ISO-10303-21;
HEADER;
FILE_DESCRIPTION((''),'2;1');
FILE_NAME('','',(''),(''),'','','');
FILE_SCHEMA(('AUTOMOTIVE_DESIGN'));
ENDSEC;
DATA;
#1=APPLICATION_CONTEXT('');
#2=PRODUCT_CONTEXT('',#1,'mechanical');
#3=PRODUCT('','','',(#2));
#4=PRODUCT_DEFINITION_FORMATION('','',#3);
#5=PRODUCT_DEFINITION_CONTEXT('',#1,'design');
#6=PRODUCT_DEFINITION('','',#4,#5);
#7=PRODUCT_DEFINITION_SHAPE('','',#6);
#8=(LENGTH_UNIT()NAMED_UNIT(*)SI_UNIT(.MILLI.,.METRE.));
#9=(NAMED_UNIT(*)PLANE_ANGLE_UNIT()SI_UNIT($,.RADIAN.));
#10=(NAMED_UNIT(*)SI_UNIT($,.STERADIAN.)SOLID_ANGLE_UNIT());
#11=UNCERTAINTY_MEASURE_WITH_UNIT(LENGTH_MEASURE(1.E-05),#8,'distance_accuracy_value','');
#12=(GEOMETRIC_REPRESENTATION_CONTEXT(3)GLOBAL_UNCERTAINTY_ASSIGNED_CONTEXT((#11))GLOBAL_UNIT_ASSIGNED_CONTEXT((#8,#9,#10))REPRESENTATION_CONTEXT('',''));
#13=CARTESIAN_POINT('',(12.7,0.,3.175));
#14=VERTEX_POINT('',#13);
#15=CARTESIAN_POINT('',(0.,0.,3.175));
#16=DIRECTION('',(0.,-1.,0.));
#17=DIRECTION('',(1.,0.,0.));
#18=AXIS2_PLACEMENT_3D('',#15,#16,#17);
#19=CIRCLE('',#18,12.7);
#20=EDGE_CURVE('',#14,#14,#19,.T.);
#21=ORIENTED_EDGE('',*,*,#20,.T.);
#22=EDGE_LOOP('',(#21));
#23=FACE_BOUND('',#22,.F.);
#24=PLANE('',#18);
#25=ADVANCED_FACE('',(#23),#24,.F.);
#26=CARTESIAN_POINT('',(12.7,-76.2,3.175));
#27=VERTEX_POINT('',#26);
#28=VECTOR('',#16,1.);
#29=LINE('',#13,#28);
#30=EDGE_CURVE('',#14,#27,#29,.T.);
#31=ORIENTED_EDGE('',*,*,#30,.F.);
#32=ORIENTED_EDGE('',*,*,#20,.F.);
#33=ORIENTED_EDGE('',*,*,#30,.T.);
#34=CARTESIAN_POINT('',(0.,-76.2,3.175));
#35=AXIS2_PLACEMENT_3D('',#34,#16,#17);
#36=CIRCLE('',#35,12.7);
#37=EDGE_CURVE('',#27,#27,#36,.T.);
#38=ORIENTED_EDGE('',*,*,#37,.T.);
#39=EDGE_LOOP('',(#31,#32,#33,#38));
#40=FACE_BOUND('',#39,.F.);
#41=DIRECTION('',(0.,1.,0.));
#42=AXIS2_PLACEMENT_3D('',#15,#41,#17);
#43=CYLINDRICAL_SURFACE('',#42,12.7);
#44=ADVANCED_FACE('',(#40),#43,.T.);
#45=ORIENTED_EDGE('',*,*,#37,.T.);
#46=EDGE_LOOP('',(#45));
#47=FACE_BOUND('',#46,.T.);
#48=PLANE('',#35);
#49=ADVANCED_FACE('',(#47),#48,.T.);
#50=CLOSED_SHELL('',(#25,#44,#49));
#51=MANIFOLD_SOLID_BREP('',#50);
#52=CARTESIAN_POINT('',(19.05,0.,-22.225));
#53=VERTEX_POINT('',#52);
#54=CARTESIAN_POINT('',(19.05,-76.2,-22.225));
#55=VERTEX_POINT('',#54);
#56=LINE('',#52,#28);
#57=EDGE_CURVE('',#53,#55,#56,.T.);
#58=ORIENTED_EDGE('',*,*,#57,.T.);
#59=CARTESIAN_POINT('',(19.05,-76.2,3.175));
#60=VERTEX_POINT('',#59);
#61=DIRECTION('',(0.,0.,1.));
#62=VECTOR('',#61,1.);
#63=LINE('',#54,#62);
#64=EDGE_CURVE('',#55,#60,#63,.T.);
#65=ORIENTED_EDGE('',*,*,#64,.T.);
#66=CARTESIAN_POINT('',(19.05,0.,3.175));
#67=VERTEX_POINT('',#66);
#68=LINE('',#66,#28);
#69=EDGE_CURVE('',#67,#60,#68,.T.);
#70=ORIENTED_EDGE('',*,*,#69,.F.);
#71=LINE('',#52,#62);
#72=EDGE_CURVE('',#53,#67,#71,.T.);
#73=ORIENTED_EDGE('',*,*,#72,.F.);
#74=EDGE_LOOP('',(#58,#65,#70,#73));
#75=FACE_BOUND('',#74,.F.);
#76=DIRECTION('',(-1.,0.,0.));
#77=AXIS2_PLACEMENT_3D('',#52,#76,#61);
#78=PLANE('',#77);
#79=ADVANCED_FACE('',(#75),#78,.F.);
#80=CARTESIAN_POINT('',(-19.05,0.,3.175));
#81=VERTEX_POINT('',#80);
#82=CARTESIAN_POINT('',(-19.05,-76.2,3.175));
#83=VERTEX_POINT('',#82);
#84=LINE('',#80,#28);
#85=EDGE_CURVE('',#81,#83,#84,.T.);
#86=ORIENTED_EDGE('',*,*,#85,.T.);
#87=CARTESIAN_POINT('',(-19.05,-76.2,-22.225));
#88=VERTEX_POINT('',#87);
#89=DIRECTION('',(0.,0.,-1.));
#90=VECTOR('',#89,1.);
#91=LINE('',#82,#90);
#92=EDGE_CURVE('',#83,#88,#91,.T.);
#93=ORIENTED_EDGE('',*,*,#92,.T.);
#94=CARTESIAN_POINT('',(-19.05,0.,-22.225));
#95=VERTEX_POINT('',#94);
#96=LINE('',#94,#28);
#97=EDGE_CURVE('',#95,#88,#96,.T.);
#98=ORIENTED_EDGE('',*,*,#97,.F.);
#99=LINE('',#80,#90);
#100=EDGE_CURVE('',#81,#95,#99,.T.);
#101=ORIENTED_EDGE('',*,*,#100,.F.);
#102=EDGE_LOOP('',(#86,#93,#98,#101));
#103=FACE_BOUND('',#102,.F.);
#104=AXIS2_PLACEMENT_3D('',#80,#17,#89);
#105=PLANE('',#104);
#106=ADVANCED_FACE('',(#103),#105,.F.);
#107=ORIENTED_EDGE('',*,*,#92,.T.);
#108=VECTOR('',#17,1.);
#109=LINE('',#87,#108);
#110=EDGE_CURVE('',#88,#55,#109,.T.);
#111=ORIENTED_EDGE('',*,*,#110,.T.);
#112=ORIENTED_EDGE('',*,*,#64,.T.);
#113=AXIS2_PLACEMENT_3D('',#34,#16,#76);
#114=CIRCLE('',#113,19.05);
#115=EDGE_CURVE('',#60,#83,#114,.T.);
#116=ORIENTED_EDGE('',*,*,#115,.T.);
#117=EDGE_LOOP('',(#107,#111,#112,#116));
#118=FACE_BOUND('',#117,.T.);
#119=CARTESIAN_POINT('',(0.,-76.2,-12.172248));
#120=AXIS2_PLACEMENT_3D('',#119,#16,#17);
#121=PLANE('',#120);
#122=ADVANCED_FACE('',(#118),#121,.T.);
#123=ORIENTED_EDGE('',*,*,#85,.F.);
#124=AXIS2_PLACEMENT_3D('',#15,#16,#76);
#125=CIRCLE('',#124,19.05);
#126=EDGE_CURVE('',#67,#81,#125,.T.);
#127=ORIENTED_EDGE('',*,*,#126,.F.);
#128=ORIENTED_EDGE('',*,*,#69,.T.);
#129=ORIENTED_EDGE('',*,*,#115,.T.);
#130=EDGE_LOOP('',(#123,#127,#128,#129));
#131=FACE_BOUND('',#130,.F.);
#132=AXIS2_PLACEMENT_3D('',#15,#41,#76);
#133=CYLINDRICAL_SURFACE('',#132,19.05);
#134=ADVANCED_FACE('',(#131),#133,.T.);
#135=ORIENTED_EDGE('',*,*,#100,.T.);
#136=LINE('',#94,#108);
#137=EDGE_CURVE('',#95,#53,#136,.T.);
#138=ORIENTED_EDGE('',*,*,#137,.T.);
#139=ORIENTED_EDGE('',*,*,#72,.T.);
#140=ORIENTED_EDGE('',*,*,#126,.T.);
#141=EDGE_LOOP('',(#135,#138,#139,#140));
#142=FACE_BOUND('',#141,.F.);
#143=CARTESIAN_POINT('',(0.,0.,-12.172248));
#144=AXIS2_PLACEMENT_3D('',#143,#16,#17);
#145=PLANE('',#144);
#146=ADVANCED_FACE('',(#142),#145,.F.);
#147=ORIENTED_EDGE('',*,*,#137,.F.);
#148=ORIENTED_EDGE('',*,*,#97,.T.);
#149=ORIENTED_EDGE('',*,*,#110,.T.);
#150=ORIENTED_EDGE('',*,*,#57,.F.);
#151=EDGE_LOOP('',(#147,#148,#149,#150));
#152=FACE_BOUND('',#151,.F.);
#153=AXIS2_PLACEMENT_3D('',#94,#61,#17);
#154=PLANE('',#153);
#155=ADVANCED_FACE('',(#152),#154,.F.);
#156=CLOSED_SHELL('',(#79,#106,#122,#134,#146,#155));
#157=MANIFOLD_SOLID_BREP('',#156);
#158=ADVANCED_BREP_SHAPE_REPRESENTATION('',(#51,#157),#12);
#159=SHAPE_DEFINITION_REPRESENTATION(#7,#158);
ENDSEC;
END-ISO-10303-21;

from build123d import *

# Parameters (mm, degrees)
F1_R     = 12.7
F2_DEPTH = 76.2


# Not quite as in the source:
# - a feature of the source that left no trace in its solid (it failed there, or was rolled back) is left out


with BuildPart() as f2:
    # F1 (on face) → F2 (new body)
    with BuildSketch(Plane.XZ):
        with Locations((0, 3.175)):
            Circle(F1_R)
    extrude(amount=F2_DEPTH)


with BuildPart() as f2b:
    # F0 (on Front) → F2, piece 2 (new body)
    with BuildSketch(Plane.XZ):
        with BuildLine():
            Line((-19.05, 3.175), (-19.05, -22.225))
            Line((-19.05, -22.225), (19.05, -22.225))
            Line((19.05, -22.225), (19.05, 3.175))
            ThreePointArc((19.05, 3.175), (0, -15.875), (-19.05, 3.175))
        make_face()
        with BuildLine():
            ThreePointArc((19.05, 3.175), (0, 22.225), (-19.05, 3.175))
            ThreePointArc((-19.05, 3.175), (0, -15.875), (19.05, 3.175))
        make_face()
    extrude(amount=F2_DEPTH)


solid = Compound([f2.part, f2b.part])
